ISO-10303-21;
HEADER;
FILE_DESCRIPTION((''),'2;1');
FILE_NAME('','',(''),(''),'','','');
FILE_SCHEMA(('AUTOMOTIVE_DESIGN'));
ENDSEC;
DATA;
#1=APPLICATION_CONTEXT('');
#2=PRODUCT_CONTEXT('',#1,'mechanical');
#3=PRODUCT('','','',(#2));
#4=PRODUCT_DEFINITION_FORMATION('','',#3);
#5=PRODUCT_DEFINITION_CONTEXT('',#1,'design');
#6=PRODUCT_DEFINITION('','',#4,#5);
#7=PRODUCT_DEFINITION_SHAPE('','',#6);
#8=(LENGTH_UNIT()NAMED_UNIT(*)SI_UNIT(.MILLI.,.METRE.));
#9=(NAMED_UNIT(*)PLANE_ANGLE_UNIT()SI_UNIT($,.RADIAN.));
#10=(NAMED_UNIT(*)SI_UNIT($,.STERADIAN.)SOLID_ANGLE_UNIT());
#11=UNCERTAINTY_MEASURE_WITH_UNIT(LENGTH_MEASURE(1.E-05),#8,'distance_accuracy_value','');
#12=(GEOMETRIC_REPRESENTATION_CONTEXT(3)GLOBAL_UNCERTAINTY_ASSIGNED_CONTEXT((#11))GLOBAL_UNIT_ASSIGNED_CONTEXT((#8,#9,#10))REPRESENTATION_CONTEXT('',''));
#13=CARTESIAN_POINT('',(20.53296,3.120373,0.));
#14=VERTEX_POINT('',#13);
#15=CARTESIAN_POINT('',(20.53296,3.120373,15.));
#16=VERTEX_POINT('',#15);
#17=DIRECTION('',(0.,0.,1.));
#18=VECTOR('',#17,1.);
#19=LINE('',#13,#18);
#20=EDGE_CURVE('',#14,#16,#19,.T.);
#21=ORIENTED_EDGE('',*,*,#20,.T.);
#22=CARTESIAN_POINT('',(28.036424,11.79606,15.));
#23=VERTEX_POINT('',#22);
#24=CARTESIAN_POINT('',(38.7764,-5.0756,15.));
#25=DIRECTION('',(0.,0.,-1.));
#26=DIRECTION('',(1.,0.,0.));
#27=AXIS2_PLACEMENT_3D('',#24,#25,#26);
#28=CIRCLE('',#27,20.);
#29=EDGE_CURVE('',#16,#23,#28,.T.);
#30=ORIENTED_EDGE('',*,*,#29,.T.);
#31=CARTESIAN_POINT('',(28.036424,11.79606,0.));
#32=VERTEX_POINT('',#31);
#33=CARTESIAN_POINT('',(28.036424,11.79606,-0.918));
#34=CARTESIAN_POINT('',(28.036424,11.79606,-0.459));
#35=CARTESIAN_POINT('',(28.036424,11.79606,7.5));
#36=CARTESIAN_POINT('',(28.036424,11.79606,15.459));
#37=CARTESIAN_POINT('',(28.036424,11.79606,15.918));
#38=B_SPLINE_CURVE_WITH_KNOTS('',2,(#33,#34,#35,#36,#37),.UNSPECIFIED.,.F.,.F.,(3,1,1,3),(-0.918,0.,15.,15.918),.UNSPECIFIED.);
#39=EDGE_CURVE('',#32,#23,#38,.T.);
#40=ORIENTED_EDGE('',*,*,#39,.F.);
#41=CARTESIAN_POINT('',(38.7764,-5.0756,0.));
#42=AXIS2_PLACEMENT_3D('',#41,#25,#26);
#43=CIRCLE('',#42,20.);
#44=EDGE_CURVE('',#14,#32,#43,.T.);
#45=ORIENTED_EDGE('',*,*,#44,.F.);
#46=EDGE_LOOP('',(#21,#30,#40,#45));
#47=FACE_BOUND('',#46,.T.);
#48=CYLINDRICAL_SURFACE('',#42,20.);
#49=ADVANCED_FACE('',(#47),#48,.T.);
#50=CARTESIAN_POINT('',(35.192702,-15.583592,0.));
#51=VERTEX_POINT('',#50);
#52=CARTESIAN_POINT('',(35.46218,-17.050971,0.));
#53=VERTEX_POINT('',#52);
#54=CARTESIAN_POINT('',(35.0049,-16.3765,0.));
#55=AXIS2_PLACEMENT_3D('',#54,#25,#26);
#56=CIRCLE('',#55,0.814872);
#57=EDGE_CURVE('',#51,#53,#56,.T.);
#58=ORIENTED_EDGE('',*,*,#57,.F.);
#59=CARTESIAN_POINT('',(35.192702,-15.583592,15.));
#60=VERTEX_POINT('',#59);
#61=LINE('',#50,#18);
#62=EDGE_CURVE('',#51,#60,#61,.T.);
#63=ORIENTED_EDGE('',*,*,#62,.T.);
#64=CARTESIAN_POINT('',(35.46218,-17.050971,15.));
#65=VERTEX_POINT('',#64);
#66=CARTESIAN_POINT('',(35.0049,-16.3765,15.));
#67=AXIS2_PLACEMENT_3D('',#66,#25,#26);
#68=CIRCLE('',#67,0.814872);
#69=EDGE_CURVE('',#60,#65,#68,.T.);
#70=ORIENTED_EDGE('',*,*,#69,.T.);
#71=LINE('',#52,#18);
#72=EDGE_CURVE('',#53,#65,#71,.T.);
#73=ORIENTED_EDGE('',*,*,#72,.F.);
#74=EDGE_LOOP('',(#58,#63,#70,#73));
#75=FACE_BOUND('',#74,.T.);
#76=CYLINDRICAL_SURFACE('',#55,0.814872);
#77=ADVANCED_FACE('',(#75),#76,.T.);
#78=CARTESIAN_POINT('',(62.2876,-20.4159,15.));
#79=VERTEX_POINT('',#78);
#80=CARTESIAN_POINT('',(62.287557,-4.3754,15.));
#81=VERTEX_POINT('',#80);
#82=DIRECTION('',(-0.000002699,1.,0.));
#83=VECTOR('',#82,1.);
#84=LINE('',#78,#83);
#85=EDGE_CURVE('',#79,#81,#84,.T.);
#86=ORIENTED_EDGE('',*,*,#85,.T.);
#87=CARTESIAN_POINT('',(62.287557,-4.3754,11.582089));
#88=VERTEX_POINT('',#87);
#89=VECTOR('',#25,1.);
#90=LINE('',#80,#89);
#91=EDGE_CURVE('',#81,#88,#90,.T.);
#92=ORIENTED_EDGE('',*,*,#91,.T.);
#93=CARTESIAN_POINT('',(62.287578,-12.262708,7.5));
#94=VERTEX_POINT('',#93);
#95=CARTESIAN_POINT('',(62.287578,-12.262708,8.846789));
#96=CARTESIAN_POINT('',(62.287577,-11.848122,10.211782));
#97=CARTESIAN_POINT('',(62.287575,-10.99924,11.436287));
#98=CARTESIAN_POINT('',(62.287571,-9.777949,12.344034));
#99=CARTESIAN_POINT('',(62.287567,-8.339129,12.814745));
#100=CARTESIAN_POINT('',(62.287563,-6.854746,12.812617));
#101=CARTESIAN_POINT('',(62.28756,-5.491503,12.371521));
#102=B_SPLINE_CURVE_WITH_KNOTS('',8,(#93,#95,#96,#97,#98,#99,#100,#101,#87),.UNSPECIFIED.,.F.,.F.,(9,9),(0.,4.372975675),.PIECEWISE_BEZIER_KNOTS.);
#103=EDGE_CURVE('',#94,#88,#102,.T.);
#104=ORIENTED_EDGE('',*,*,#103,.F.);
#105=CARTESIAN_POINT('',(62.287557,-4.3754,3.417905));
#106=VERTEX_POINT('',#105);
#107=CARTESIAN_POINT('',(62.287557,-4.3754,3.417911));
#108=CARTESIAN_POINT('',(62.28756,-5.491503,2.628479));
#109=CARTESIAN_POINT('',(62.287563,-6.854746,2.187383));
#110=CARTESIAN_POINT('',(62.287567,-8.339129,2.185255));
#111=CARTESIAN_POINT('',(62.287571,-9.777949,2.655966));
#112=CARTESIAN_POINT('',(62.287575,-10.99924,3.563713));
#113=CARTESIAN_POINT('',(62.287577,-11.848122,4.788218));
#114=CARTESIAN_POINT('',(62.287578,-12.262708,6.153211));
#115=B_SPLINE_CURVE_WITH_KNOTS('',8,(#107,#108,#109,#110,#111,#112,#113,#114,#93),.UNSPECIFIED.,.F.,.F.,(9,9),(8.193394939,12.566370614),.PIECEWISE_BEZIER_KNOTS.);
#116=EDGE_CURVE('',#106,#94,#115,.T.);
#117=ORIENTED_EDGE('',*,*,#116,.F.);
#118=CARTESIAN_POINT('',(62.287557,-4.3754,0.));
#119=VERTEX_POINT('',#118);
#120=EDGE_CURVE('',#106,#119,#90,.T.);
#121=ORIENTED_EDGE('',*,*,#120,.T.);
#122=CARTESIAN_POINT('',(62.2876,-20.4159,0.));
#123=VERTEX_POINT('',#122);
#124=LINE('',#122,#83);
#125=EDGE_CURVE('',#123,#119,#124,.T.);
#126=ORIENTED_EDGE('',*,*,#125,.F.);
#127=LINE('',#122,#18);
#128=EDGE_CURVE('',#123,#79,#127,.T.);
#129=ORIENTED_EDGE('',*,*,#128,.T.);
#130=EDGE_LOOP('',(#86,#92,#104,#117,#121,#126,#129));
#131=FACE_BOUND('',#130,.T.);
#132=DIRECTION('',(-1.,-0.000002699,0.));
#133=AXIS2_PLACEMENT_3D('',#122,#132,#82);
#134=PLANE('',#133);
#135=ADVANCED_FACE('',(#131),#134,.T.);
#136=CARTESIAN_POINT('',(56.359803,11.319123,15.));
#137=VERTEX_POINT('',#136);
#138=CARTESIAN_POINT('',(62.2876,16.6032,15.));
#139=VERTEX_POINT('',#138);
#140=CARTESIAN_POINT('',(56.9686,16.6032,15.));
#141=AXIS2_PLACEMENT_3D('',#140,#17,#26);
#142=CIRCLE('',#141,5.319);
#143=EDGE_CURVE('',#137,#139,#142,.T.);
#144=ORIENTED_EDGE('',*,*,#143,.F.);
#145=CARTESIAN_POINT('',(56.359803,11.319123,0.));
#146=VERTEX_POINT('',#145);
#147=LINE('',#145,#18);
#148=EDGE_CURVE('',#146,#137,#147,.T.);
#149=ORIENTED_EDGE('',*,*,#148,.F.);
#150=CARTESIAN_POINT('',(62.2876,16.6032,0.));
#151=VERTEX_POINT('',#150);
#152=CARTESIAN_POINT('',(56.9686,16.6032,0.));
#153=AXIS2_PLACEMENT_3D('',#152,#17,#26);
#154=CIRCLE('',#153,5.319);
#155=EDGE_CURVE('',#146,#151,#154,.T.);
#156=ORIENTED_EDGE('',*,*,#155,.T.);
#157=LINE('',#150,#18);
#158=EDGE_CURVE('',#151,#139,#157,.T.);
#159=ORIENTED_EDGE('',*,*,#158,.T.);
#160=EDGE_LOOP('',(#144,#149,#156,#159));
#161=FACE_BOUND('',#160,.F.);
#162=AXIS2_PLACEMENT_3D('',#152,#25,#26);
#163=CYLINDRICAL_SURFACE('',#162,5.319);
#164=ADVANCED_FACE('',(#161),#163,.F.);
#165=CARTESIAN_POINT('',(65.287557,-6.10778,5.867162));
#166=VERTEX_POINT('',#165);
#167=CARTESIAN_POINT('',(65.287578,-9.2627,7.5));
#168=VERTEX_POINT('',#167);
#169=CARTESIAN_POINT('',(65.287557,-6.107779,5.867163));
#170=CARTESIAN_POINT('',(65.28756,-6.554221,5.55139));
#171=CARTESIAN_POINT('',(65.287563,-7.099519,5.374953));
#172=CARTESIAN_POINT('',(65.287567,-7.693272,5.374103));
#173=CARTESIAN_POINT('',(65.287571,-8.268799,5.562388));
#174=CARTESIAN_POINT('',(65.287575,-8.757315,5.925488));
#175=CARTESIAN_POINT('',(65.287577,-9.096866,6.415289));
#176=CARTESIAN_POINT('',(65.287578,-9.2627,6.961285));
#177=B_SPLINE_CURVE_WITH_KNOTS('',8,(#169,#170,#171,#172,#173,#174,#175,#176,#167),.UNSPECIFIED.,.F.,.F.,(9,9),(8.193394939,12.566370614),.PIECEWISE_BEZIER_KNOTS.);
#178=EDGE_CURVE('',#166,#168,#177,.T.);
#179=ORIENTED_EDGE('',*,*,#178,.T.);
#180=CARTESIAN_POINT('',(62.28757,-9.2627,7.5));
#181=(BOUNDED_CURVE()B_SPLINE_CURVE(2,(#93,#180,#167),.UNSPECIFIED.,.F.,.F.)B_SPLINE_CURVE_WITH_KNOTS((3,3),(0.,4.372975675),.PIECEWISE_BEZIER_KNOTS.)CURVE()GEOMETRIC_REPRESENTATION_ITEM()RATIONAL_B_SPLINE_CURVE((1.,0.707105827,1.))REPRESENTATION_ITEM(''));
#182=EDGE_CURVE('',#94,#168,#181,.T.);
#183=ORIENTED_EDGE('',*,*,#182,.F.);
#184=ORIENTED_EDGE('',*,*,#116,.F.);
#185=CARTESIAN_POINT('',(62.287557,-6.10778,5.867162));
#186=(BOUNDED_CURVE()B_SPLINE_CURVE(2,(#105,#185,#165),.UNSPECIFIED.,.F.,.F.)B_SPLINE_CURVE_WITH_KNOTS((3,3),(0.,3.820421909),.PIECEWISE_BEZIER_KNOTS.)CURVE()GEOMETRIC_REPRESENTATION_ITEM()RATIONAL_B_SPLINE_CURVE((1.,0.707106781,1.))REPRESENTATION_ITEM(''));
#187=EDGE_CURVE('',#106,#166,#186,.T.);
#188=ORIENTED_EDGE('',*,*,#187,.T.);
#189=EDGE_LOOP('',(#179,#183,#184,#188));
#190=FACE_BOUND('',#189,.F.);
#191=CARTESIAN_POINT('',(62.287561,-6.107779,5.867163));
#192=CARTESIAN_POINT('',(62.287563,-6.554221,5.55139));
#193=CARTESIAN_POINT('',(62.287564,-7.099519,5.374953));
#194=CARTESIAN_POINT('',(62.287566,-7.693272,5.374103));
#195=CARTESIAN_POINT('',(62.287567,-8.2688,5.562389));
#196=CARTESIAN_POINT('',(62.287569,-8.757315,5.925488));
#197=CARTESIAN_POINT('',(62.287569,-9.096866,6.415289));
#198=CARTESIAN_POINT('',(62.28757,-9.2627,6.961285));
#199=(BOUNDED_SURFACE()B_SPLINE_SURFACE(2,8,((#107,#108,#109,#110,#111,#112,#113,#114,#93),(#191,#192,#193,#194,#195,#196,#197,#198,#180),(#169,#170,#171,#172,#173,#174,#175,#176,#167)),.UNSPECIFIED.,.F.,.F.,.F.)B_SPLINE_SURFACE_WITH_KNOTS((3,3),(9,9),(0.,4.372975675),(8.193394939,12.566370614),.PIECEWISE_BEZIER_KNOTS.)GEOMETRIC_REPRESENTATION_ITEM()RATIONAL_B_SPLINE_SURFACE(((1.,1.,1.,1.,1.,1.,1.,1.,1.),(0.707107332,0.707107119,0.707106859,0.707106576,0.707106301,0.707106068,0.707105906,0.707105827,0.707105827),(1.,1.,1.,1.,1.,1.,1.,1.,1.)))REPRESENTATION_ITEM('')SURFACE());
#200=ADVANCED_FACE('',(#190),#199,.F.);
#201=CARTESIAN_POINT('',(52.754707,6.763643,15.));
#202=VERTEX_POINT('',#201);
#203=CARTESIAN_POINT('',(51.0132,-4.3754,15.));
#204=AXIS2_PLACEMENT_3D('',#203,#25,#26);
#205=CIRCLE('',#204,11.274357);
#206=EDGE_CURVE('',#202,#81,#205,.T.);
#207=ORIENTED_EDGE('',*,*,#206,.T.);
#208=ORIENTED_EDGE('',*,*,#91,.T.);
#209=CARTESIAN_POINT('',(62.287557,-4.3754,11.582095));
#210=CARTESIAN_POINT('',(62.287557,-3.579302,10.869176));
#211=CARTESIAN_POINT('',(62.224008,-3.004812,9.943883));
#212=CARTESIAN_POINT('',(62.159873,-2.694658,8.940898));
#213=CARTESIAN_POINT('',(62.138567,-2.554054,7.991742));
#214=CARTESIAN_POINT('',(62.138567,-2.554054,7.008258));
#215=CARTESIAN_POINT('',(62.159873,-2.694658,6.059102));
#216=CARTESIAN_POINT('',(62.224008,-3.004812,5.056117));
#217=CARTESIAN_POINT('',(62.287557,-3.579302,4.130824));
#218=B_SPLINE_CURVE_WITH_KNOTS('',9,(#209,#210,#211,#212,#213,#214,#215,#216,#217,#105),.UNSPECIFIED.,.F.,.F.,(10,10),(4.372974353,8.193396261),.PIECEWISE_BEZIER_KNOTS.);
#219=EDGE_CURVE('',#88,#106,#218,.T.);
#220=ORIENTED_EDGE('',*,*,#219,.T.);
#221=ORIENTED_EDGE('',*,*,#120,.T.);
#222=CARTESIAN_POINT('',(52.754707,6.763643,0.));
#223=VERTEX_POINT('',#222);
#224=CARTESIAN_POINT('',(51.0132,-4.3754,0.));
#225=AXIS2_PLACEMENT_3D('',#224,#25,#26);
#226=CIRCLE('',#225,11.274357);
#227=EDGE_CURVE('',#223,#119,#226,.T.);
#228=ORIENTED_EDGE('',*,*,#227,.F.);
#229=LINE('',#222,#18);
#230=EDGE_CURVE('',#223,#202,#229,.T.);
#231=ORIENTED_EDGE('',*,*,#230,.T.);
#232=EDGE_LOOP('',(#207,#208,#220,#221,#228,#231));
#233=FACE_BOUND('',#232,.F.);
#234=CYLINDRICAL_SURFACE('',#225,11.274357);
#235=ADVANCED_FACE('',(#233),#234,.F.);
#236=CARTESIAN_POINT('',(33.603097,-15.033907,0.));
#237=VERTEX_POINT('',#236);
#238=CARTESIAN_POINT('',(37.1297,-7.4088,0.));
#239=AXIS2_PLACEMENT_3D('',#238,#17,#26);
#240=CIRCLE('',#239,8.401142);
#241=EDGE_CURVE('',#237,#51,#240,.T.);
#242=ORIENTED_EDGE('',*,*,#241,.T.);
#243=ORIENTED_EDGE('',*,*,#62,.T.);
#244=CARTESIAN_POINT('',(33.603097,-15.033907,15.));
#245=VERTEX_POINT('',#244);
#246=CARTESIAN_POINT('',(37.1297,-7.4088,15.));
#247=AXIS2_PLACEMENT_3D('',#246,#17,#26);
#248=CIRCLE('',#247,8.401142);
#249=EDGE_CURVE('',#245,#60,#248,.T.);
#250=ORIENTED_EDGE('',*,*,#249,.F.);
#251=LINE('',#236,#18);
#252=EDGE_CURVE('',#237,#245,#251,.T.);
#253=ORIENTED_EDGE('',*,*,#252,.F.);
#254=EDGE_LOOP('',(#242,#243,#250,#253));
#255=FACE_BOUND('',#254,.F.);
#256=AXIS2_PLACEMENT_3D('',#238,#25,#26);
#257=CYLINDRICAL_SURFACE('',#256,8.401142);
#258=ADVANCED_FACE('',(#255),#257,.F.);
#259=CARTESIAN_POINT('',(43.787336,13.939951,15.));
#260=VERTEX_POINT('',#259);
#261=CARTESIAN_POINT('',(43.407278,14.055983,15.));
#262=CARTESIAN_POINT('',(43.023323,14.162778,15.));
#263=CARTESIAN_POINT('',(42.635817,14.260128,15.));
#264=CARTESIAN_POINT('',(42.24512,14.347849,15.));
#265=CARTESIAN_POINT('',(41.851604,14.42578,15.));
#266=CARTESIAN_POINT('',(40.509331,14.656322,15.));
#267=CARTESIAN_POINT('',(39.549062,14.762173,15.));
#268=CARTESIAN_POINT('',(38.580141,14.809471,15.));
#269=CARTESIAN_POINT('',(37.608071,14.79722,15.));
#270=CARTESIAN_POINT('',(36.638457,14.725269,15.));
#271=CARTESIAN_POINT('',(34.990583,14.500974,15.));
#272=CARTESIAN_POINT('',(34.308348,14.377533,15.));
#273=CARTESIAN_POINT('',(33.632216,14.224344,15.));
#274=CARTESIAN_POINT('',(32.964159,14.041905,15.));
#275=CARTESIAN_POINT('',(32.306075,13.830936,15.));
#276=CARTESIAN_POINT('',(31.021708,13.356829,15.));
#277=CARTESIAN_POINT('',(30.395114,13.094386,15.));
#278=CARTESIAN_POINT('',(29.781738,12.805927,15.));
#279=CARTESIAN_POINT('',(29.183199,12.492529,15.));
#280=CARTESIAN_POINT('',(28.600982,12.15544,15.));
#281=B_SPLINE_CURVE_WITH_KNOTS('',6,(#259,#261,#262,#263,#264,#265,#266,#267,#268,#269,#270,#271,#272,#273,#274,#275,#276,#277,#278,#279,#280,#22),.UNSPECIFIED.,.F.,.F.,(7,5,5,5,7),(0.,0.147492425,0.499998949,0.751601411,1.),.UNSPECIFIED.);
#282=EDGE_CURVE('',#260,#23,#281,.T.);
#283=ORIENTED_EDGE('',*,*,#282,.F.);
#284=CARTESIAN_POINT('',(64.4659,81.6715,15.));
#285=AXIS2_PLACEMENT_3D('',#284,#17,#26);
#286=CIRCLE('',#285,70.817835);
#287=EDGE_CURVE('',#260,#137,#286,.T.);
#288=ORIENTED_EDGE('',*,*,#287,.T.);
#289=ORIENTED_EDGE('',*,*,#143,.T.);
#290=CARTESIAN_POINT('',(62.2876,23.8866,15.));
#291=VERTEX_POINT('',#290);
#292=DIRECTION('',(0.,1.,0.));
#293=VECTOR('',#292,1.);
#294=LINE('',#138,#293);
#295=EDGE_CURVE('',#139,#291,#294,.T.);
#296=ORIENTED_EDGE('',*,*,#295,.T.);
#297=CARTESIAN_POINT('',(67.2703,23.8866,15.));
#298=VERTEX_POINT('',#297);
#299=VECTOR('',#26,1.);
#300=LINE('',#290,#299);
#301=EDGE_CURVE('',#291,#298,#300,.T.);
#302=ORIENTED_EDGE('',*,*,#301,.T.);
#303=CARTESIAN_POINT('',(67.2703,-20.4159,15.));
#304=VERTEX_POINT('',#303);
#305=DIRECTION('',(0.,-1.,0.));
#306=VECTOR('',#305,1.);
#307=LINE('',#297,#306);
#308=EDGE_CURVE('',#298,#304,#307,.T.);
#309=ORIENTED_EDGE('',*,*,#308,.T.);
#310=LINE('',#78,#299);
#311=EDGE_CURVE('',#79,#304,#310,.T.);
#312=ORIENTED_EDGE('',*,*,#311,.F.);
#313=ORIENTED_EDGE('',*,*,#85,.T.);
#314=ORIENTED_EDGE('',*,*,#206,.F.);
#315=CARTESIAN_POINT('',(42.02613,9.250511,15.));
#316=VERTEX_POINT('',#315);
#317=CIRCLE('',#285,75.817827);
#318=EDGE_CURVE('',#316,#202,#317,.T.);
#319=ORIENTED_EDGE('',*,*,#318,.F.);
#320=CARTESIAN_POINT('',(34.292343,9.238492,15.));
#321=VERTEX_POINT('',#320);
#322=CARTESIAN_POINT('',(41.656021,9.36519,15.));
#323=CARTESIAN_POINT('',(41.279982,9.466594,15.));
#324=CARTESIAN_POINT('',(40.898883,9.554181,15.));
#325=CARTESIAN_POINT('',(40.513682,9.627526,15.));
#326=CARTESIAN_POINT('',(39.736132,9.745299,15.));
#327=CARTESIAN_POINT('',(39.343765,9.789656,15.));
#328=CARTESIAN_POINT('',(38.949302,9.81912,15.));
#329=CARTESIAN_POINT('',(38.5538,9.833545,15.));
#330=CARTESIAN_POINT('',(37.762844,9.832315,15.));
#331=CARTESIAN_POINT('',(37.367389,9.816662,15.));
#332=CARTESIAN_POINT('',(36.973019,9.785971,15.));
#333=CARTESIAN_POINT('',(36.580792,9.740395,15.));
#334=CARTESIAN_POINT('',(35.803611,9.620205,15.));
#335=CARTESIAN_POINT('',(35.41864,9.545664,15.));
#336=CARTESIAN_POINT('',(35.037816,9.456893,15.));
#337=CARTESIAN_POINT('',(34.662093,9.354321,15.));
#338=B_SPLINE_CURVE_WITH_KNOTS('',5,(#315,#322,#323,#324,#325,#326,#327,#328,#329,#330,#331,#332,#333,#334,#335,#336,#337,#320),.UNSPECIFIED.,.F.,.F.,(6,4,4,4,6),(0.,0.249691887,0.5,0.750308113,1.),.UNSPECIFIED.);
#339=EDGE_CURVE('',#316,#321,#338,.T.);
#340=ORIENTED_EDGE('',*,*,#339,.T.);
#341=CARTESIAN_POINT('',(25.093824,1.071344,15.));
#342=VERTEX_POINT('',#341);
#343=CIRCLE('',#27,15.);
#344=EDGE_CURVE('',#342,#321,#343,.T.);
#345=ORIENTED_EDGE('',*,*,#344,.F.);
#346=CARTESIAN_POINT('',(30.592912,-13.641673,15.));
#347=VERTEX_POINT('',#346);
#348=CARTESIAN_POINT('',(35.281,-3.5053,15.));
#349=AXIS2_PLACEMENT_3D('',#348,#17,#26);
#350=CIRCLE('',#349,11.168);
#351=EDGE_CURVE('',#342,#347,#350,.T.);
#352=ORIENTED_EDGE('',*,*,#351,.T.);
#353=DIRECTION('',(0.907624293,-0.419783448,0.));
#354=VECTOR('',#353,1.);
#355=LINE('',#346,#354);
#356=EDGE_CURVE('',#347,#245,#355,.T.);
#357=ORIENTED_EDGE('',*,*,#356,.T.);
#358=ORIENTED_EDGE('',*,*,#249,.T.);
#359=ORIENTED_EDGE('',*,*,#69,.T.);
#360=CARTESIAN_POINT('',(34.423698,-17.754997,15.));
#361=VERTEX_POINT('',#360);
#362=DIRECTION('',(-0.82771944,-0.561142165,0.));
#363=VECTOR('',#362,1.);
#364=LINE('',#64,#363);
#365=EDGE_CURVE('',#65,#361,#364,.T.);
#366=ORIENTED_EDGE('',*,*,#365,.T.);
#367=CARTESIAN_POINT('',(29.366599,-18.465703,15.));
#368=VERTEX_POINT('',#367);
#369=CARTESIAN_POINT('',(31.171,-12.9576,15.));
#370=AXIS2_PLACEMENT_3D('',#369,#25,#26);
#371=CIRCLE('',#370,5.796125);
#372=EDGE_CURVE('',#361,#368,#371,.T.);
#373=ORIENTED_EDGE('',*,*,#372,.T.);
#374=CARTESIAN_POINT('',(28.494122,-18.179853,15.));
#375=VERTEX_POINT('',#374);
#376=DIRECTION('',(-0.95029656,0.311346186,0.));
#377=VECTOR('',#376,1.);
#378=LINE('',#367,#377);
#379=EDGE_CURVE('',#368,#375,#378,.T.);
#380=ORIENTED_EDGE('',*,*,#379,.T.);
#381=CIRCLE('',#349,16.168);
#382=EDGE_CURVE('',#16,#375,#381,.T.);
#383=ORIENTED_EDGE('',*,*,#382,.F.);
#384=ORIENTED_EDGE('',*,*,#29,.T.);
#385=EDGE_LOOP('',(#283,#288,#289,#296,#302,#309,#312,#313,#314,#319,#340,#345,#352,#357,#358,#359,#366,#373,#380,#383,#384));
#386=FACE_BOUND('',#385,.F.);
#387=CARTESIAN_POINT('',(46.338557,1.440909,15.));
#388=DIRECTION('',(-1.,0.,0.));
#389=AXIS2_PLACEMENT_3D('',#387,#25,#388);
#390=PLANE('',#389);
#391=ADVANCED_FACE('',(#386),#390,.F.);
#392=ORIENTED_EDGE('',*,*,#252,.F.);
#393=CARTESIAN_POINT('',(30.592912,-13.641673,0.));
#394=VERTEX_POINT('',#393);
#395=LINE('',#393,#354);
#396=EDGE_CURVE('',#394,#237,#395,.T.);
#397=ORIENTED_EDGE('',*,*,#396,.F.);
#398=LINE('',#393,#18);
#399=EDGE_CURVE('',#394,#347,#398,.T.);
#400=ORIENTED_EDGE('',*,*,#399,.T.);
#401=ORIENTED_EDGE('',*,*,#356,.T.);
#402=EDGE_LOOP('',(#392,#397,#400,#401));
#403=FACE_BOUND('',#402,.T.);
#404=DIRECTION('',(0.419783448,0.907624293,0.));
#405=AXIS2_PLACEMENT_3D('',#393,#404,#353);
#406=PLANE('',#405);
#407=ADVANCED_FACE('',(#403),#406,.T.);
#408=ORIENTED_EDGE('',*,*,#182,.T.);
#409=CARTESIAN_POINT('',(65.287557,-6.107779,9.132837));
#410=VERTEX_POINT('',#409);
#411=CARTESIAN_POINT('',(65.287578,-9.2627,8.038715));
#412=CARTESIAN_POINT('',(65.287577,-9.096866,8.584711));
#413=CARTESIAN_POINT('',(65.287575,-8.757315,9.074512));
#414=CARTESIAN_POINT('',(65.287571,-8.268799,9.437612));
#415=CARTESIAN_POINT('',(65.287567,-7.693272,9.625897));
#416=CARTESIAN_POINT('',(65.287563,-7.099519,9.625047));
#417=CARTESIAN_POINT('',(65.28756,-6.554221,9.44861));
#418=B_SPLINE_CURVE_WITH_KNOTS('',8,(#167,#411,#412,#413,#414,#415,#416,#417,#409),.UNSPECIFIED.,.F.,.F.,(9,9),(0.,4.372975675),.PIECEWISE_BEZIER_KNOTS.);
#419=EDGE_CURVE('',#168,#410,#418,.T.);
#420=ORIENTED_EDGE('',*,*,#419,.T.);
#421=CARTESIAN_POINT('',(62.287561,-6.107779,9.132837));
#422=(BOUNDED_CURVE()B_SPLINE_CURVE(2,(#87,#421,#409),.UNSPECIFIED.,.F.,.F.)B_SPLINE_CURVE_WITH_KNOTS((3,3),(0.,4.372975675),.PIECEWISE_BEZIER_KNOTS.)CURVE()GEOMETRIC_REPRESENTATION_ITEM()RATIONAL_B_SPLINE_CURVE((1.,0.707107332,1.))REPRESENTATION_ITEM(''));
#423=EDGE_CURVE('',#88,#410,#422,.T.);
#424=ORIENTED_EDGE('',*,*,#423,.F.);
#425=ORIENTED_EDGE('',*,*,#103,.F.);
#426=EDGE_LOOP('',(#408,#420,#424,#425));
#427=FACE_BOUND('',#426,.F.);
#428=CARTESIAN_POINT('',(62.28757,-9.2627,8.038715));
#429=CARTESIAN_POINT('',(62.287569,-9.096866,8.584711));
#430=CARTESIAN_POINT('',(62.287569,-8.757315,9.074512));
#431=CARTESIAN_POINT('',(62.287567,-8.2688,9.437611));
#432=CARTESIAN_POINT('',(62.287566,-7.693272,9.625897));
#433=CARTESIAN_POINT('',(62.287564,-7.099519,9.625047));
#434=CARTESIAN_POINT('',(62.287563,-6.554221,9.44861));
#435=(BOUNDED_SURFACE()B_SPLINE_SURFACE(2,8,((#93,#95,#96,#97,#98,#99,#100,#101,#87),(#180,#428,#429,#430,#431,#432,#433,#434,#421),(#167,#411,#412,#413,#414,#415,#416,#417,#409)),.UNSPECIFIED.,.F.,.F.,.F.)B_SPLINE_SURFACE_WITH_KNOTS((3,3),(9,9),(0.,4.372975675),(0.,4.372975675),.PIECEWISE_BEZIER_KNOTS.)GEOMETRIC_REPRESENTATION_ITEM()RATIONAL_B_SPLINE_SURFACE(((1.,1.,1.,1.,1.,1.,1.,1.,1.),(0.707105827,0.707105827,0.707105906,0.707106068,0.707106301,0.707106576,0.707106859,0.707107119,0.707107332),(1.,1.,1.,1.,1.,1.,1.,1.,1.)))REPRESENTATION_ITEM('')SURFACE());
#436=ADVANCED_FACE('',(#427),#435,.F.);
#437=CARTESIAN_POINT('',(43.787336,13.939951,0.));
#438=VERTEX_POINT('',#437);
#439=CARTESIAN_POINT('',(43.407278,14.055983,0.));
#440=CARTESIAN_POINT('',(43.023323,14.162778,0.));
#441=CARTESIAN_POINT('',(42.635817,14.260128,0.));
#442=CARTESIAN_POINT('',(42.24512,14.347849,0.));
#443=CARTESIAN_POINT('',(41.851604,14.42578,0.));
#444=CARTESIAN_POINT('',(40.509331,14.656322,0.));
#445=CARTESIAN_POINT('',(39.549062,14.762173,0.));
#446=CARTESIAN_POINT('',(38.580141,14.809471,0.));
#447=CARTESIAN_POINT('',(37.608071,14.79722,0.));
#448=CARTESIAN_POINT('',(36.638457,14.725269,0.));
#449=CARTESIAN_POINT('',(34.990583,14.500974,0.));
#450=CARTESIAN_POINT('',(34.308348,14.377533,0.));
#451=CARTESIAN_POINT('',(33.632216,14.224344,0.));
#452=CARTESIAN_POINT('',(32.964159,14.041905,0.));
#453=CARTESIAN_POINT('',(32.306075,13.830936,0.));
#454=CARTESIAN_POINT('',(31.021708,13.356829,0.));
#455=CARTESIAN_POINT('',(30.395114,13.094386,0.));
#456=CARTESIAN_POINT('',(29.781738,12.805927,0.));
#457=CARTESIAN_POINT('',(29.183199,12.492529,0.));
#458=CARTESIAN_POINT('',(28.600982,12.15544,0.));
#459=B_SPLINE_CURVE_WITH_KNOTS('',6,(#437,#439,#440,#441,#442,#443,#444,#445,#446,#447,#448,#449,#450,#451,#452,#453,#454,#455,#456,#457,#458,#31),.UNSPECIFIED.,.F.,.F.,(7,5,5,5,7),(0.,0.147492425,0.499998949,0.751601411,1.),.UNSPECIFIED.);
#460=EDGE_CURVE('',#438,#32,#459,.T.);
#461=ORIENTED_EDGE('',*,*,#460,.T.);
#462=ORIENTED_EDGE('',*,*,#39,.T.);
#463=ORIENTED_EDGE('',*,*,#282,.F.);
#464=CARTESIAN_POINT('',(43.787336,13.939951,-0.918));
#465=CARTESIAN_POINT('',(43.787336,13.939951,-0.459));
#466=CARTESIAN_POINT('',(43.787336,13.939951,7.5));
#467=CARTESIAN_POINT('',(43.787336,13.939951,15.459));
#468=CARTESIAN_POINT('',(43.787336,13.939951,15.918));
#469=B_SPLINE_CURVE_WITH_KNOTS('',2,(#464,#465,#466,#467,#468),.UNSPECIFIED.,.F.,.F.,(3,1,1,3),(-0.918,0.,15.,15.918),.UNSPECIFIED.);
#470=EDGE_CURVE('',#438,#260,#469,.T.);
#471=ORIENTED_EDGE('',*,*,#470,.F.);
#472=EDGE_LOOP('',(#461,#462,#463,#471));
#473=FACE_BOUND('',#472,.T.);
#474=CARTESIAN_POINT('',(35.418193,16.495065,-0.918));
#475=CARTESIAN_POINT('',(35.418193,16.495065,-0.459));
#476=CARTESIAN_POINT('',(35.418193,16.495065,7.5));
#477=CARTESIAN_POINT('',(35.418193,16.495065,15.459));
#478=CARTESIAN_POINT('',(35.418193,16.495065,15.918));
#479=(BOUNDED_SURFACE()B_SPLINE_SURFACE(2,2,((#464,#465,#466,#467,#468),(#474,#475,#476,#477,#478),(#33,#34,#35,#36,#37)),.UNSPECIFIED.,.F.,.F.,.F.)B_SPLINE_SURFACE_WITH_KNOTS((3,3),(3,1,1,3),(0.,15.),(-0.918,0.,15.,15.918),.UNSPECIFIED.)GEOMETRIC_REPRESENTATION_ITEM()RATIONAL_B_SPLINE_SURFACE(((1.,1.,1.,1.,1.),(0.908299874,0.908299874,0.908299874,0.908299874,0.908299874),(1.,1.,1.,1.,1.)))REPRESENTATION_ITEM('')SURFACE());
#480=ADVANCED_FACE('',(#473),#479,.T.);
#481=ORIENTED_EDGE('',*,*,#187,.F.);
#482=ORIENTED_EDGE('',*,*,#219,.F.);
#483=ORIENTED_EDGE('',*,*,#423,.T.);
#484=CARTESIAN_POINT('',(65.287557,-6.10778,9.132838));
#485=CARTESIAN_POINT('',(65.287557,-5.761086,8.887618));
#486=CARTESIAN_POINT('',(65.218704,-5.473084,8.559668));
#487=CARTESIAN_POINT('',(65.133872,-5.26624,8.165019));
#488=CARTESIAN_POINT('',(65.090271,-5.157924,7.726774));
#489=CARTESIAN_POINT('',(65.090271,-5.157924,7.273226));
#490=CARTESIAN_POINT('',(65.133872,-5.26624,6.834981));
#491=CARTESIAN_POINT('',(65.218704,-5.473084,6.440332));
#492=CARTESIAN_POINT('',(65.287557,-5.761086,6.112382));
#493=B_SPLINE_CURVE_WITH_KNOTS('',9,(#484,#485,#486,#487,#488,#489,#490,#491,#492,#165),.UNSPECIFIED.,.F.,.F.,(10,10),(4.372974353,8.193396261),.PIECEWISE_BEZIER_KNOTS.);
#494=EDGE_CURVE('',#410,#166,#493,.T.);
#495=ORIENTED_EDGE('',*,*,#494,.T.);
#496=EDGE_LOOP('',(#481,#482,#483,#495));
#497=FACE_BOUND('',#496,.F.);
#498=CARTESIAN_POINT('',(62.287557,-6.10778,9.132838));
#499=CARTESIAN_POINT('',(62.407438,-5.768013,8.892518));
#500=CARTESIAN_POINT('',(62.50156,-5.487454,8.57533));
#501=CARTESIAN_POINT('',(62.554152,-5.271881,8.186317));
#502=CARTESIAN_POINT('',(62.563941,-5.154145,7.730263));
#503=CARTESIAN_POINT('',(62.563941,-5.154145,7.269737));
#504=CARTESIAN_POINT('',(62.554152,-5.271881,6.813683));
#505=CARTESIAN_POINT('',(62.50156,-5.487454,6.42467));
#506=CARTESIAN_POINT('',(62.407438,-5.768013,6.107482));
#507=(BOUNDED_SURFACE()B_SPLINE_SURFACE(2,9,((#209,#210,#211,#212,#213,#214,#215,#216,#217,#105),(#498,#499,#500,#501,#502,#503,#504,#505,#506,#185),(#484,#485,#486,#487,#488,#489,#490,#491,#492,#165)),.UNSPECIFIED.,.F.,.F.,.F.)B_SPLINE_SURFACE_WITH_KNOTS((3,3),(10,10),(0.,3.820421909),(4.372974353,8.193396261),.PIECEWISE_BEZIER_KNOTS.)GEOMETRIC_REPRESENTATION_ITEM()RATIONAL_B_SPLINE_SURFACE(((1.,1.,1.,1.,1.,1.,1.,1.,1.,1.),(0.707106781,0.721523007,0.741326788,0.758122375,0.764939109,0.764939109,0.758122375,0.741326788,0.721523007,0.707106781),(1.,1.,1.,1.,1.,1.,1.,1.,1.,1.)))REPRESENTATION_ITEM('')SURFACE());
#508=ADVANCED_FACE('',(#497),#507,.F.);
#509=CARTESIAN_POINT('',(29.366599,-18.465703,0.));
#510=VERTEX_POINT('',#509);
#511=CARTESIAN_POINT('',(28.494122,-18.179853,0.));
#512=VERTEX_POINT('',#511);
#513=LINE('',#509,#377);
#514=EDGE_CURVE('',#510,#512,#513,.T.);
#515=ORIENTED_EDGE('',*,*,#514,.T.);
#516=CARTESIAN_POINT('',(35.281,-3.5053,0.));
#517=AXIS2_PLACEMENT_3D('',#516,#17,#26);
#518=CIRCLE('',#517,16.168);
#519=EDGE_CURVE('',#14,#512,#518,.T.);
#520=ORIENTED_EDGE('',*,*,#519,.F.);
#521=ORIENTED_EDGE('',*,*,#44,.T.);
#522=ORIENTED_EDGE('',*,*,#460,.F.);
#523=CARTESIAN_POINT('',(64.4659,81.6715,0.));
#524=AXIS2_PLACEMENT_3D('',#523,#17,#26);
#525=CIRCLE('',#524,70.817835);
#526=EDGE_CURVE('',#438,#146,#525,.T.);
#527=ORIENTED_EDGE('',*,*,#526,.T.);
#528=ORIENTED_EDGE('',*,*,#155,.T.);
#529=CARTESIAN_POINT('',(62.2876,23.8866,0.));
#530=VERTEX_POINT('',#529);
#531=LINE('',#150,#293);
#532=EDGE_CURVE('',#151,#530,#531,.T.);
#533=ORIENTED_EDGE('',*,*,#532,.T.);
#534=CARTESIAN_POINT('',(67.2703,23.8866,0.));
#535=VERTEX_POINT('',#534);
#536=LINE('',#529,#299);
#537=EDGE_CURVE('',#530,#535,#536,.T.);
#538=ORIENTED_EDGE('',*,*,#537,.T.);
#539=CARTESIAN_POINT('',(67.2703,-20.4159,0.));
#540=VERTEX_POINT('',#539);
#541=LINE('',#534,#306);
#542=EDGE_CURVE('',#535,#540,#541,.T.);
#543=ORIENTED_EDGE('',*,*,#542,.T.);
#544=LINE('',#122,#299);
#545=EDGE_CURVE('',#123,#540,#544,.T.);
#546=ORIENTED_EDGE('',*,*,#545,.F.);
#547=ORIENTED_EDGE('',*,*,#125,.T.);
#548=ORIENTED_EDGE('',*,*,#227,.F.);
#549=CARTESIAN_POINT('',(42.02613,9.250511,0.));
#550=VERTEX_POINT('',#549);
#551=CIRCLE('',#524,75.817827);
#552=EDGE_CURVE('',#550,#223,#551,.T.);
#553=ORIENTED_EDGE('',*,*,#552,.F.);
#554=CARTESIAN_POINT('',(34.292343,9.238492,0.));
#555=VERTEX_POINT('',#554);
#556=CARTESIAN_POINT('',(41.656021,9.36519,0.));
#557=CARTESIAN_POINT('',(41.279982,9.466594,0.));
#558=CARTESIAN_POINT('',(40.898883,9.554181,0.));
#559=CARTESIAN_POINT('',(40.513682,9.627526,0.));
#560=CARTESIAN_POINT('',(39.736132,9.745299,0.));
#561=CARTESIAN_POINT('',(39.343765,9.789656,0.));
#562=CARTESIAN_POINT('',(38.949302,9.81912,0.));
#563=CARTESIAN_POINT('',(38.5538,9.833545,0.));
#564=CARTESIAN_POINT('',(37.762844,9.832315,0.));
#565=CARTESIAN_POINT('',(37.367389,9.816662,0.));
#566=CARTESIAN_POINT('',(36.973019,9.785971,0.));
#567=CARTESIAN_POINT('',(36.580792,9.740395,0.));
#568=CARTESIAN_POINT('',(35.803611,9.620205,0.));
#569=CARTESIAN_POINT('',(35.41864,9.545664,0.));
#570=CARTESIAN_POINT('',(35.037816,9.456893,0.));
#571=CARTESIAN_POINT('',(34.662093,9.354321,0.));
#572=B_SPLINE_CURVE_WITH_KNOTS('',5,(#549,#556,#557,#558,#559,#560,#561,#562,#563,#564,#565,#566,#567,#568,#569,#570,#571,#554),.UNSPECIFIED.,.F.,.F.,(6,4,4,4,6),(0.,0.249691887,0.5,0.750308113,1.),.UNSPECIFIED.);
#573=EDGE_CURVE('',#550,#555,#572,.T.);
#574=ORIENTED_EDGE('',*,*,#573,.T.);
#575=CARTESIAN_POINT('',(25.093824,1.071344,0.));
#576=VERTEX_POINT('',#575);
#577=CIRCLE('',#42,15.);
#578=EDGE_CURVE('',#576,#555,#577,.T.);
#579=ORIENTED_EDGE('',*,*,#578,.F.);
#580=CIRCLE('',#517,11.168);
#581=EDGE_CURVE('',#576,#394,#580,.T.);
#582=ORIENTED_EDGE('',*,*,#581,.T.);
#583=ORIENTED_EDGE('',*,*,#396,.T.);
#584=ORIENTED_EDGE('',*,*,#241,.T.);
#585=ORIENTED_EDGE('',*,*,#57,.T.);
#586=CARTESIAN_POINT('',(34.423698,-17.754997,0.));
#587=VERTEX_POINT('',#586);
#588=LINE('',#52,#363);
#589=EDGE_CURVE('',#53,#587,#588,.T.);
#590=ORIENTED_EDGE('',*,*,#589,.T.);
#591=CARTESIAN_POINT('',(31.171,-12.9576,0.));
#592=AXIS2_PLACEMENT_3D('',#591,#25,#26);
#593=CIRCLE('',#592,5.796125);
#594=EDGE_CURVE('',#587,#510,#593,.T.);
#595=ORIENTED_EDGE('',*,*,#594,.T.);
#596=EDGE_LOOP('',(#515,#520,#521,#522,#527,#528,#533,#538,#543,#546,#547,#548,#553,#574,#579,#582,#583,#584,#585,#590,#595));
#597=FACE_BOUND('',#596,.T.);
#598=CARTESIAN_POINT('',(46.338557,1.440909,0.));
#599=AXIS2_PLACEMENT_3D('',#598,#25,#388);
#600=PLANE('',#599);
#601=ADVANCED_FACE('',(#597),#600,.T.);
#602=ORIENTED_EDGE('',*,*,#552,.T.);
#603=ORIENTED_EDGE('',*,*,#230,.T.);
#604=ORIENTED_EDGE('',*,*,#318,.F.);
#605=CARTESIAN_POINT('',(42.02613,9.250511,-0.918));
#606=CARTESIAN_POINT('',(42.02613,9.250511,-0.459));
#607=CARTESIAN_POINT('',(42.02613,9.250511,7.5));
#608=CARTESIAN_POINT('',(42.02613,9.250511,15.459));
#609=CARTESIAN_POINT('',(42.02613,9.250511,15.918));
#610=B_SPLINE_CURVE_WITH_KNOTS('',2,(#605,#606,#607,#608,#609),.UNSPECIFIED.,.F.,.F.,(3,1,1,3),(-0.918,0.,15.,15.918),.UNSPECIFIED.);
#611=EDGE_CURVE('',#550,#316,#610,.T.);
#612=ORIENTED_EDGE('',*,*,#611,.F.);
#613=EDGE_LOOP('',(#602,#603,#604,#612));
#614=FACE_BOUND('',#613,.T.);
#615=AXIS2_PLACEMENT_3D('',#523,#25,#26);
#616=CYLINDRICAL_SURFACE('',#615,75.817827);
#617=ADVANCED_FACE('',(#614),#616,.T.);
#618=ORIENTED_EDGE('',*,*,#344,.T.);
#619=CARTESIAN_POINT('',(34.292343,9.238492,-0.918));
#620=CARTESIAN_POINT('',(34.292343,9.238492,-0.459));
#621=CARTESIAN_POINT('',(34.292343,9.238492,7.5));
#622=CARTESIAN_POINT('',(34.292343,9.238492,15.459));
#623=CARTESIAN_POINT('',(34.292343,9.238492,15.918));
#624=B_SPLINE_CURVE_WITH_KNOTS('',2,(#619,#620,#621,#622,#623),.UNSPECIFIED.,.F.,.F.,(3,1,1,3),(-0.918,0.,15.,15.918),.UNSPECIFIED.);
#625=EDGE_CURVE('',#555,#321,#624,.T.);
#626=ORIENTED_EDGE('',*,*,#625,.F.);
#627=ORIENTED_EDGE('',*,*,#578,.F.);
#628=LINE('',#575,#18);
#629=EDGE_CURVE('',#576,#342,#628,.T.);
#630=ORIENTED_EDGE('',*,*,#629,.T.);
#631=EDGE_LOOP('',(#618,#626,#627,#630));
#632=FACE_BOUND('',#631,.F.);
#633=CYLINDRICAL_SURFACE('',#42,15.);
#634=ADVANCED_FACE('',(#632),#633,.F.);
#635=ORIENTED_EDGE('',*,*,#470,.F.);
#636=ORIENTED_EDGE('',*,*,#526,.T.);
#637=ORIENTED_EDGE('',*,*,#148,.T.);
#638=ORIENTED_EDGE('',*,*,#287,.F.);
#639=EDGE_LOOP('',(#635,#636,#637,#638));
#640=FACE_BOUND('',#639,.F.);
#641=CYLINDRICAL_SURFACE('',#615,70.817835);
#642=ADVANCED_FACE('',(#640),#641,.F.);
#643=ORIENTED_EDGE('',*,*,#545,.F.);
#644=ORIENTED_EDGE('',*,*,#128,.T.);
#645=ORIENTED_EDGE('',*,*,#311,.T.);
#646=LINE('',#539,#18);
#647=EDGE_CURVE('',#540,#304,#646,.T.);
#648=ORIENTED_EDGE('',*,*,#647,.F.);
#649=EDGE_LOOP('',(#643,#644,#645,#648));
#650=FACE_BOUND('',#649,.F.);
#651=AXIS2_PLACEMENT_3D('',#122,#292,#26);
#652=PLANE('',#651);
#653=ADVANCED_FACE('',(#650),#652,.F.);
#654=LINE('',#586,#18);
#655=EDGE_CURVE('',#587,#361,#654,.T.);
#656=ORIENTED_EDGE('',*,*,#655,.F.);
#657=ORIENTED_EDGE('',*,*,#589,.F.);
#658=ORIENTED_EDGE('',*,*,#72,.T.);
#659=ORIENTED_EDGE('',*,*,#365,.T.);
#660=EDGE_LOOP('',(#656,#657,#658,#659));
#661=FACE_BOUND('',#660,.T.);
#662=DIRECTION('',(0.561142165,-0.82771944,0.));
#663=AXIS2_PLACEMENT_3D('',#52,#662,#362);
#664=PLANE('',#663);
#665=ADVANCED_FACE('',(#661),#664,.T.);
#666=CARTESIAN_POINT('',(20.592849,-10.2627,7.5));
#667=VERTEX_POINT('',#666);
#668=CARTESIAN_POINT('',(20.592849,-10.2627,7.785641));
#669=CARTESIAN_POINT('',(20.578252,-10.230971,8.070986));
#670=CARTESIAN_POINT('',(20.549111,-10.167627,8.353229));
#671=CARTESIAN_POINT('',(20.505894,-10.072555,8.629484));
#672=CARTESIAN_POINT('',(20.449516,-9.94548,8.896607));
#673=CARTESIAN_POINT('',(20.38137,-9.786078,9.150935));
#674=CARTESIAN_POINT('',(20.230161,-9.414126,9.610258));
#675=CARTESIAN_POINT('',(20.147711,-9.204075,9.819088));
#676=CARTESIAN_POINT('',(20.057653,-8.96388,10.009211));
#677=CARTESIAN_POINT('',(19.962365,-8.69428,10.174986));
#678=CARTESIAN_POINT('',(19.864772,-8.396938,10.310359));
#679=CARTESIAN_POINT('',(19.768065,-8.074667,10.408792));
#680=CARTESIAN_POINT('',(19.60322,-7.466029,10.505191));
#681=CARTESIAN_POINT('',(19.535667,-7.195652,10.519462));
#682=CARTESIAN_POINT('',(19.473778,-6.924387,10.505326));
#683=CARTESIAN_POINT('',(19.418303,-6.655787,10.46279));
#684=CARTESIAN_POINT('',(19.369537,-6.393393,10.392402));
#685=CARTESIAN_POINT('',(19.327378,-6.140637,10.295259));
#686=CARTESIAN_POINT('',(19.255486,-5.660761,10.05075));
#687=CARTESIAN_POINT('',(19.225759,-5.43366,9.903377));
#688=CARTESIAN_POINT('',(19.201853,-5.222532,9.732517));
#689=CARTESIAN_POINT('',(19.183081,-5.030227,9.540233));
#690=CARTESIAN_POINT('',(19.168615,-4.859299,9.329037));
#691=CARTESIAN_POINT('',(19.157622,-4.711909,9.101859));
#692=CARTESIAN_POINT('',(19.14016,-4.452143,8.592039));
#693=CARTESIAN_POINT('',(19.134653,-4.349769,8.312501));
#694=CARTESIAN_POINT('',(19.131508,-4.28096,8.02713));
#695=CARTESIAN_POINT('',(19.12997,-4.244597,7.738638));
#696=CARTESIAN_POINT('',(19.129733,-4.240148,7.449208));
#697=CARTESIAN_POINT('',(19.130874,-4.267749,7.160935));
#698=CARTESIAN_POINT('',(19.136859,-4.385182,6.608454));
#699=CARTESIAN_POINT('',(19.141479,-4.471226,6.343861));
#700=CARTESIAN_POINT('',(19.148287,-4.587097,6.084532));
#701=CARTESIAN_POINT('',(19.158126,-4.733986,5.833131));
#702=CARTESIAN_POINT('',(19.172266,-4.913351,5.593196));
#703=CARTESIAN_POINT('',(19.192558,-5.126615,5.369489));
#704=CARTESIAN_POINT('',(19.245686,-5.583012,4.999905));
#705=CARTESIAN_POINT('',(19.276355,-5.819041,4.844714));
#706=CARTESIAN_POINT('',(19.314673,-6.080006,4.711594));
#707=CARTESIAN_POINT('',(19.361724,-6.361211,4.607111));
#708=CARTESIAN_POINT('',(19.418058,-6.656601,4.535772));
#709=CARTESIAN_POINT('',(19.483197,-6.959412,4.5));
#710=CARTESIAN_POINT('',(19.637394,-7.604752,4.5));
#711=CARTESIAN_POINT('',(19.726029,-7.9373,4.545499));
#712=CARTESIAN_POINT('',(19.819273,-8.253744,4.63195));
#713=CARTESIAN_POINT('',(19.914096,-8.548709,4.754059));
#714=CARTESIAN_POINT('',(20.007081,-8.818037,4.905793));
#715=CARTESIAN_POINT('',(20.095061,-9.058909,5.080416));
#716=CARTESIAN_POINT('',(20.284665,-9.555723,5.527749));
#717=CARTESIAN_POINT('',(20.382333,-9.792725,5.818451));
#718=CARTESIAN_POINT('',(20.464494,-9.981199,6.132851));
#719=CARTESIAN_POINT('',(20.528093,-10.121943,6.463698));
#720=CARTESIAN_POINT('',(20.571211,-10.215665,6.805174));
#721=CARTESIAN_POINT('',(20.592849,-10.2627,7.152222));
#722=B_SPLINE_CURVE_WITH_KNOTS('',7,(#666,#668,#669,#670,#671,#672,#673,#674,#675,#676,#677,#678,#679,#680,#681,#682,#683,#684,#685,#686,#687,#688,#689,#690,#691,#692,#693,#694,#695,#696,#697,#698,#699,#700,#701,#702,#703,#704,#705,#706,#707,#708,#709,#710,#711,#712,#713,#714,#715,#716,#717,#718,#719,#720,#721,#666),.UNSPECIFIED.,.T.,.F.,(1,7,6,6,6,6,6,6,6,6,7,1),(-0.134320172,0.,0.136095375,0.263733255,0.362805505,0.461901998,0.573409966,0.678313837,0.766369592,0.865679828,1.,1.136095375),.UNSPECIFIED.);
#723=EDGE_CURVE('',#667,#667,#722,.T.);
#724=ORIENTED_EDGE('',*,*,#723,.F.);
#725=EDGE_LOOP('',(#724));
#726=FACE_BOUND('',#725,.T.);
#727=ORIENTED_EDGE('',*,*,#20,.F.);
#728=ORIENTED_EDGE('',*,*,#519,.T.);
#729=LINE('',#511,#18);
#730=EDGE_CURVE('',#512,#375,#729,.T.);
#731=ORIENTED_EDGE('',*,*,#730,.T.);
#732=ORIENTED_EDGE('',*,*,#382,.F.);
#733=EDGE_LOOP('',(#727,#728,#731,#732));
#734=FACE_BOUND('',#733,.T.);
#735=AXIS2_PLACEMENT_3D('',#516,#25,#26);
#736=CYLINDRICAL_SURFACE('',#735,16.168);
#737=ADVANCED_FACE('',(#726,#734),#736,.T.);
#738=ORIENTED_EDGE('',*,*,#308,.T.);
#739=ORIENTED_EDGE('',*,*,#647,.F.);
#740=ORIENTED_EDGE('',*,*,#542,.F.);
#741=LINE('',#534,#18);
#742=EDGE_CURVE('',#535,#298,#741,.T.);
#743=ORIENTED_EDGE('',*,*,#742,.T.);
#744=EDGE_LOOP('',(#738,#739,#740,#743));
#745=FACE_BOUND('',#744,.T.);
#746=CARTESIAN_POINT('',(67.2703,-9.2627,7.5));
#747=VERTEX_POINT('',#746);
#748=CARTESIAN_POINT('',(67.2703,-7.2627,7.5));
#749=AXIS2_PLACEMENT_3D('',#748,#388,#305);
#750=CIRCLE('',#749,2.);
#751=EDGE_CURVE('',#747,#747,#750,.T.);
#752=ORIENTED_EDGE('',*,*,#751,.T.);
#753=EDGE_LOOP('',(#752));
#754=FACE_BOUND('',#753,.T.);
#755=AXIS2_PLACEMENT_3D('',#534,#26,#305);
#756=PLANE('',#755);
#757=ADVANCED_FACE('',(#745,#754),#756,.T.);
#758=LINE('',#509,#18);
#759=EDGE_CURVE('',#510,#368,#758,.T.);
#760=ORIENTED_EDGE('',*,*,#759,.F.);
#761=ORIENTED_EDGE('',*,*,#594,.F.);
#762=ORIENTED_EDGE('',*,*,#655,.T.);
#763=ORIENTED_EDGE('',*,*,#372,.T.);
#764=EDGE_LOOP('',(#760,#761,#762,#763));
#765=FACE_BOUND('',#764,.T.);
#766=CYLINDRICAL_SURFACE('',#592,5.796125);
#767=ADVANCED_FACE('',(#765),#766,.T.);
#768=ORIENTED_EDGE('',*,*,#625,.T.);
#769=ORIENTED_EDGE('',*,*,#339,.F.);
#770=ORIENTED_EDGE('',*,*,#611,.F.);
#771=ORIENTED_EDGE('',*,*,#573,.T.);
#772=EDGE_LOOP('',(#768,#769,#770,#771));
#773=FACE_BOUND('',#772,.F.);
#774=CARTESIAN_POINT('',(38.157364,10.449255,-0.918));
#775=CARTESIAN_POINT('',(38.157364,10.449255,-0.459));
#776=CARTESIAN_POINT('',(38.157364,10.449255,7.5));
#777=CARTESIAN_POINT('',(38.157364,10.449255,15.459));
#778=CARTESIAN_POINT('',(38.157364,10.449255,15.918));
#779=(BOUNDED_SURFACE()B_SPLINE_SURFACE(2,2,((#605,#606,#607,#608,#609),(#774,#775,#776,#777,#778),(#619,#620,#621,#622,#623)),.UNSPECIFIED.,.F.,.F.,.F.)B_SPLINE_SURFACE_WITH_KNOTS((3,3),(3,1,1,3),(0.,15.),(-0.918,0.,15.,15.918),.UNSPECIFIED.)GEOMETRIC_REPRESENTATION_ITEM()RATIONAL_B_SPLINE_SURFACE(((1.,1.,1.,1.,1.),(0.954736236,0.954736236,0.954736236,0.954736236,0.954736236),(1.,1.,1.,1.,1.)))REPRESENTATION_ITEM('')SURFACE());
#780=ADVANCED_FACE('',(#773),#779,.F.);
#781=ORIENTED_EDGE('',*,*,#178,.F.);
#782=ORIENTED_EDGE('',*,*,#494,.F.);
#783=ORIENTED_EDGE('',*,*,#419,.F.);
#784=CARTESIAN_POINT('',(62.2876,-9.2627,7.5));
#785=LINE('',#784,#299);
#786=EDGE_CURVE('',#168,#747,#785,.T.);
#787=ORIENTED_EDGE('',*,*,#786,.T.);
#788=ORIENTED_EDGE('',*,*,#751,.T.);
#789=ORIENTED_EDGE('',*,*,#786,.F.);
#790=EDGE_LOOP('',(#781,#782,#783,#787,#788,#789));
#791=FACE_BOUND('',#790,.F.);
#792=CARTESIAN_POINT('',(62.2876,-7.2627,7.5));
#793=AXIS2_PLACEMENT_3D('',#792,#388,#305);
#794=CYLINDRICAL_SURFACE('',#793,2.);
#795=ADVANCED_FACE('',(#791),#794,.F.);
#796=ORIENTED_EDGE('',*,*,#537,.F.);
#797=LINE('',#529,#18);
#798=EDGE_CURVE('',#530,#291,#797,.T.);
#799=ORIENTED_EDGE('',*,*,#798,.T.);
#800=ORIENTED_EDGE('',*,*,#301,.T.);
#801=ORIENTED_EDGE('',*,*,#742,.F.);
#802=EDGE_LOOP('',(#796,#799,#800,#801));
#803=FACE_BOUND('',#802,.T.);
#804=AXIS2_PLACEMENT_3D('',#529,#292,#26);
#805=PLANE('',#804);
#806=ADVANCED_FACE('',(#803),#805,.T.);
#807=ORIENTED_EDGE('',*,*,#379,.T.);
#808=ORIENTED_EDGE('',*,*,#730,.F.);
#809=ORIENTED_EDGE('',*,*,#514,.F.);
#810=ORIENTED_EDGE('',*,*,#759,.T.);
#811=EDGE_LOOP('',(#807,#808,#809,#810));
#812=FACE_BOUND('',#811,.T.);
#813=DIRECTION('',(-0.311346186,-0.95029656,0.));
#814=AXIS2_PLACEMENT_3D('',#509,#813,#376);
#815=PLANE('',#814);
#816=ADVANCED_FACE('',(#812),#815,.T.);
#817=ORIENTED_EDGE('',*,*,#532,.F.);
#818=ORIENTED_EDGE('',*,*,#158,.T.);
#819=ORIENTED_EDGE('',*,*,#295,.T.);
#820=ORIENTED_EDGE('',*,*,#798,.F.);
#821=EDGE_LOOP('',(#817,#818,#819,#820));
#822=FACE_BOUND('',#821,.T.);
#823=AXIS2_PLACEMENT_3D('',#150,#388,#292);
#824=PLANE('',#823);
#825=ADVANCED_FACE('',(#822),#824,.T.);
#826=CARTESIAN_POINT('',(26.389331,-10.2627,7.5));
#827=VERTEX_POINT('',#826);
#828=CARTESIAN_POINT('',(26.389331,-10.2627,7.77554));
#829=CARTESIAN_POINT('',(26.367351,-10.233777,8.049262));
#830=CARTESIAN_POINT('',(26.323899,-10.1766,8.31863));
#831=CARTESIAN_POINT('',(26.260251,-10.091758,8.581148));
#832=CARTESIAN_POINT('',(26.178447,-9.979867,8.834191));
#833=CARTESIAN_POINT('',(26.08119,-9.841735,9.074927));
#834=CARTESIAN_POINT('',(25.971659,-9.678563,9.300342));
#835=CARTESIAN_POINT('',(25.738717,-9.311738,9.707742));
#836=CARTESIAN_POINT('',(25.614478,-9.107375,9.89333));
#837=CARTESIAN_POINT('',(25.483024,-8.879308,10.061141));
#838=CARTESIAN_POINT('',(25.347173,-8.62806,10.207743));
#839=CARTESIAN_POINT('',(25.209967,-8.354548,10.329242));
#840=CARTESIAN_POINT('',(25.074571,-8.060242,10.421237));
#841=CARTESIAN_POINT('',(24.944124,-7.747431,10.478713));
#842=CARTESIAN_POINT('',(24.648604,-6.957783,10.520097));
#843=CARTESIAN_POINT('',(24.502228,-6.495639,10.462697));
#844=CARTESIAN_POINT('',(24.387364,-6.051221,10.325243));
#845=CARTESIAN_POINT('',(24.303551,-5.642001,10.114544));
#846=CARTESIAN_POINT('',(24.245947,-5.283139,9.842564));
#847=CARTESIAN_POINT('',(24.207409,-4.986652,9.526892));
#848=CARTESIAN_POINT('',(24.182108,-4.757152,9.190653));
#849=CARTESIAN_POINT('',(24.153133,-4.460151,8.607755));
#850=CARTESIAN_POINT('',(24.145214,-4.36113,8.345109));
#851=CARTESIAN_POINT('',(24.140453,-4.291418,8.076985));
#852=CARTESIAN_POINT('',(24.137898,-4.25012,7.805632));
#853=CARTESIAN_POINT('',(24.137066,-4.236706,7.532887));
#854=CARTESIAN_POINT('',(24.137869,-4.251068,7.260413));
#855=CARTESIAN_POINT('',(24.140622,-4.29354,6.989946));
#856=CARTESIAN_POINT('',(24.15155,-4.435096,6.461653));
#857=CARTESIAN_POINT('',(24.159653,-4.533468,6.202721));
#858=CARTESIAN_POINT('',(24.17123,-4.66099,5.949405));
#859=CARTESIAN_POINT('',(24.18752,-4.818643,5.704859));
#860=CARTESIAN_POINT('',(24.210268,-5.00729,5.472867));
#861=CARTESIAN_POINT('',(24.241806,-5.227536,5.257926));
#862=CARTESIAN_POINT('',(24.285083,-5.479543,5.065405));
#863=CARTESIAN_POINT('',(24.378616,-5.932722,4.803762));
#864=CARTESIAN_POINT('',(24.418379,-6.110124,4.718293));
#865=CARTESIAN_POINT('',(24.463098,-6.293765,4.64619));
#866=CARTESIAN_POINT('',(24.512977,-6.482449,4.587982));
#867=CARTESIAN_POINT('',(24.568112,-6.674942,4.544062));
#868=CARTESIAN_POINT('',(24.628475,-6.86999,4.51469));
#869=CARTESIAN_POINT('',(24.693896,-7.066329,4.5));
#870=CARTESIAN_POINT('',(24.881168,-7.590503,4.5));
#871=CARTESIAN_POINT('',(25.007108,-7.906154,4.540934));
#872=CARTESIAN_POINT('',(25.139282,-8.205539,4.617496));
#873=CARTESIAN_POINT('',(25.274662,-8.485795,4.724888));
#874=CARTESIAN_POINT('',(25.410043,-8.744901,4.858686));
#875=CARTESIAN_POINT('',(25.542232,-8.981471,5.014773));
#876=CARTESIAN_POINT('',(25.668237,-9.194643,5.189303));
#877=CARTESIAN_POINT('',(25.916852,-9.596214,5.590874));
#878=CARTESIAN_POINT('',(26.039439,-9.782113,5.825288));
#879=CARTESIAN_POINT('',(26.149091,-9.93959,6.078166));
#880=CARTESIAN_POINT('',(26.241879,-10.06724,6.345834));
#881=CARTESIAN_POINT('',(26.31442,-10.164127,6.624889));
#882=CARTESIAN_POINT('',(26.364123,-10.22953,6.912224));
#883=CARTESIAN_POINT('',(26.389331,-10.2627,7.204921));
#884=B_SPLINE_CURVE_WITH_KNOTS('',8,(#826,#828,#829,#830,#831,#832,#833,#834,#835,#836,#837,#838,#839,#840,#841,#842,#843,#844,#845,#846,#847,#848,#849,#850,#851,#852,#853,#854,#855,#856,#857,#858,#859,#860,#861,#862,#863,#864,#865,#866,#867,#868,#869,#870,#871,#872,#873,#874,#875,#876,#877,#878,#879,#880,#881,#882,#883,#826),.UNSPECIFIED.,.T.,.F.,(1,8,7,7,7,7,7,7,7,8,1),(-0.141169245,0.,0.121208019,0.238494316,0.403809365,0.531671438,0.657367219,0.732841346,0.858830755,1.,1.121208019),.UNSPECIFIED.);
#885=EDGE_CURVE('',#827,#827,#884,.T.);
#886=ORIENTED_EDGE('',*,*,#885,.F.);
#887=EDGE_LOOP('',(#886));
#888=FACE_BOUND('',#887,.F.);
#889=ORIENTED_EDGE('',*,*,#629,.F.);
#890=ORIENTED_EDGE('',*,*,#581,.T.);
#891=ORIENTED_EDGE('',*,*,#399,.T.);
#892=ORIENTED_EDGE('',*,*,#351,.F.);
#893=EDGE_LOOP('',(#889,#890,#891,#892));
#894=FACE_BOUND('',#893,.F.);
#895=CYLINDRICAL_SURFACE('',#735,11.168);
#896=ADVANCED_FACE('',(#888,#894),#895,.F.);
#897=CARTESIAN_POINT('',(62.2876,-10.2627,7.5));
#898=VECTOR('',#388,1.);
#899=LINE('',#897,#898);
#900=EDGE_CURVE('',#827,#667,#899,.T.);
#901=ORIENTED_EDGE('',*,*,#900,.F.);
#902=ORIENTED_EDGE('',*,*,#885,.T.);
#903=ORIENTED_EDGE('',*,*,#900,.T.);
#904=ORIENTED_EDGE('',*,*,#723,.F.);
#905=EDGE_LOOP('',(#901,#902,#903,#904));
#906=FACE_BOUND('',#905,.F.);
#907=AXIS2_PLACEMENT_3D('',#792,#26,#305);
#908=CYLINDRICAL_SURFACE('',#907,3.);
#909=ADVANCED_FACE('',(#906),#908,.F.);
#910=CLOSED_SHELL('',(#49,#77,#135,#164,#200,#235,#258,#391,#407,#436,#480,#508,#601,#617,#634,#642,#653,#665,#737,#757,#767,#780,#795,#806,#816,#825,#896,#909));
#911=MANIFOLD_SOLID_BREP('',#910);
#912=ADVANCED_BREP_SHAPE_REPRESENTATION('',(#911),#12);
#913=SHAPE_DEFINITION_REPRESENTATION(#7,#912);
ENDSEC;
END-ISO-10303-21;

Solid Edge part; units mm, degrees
sketch "Sketch1" plane through (0, 0, 0) normal (0, 0, 1) x (1, 0, 0)
  line L0 (62.2876, -20.4159) -> (62.2876, -4.3754)
  arc A0 (52.7547, 6.7636) -> (62.2876, -4.3754) centre (51.0132, -4.3754) cw
  arc A1 (40.1391, 9.8624) -> (52.7547, 6.7636) centre (64.4659, 81.6715) ccw
  arc A2 (25.0937, 1.0714) -> (30.5929, -13.6417) centre (35.281, -3.5053) ccw
  line L1 (30.5929, -13.6417) -> (33.6031, -15.0339)
  arc A3 (33.6031, -15.0339) -> (35.1927, -15.5836) centre (37.1297, -7.4088) ccw
  arc A4 (35.1927, -15.5836) -> (35.4622, -17.051) centre (35.0049, -16.3765) cw
  line L2 (35.4622, -17.051) -> (34.4237, -17.755)
  arc A5 (34.4237, -17.755) -> (29.3666, -18.4657) centre (31.171, -12.9576) cw
  line L3 (29.3666, -18.4657) -> (28.4941, -18.1799)
  arc A6 (20.5329, 3.1204) -> (28.4941, -18.1799) centre (35.281, -3.5053) ccw
  arc A7 (20.5329, 3.1204) -> (41.2336, 14.7729) centre (38.7764, -5.0756) cw
  arc A8 (41.2336, 14.7729) -> (56.3598, 11.3191) centre (64.4659, 81.6715) ccw
  arc A9 (56.3598, 11.3191) -> (62.2876, 16.6032) centre (56.9686, 16.6032) ccw
  line L4 (62.2876, 16.6032) -> (62.2876, 23.8866)
  line L5 (62.2876, 23.8866) -> (67.2703, 23.8866)
  line L6 (67.2703, 23.8866) -> (67.2703, -20.4159)
  line L7 (62.2876, -20.4159) -> (67.2703, -20.4159)
  arc A10 (25.0938, 1.0714) -> (40.1391, 9.8624) centre (38.7764, -5.0756) cw
extrude "Protrusion1" add sketch "Sketch1" along normal blind 15
sketch "Sketch2" plane through (62.2876, -7.2627, 12.5) normal (-1, 0, 0) x (0, -1, 0)
  circle A0 centre (0, -5) radius 2
extrude "ScavoEstrusione_1" cut sketch "Sketch2" along normal mid plane 363.09
sketch "Sketch3" plane through (62.2876, -7.2627, 12.5) normal (-1, 0, 0) x (0, -1, 0)
  circle A0 centre (0, -5) radius 3
extrude "ScavoEstrusione_2" cut sketch "Sketch3" along normal blind 211.9198
fillet "Rotondo_1" radius 3 1 edges at (62.2876, -7.2627, 5.5)
fillet "Rotondo_3" radius 13 1 edges at (40.1391, 9.8624, 7.5)
fillet "Rotondo_4" radius 19 1 edges at (41.2336, 14.7729, 7.5)
